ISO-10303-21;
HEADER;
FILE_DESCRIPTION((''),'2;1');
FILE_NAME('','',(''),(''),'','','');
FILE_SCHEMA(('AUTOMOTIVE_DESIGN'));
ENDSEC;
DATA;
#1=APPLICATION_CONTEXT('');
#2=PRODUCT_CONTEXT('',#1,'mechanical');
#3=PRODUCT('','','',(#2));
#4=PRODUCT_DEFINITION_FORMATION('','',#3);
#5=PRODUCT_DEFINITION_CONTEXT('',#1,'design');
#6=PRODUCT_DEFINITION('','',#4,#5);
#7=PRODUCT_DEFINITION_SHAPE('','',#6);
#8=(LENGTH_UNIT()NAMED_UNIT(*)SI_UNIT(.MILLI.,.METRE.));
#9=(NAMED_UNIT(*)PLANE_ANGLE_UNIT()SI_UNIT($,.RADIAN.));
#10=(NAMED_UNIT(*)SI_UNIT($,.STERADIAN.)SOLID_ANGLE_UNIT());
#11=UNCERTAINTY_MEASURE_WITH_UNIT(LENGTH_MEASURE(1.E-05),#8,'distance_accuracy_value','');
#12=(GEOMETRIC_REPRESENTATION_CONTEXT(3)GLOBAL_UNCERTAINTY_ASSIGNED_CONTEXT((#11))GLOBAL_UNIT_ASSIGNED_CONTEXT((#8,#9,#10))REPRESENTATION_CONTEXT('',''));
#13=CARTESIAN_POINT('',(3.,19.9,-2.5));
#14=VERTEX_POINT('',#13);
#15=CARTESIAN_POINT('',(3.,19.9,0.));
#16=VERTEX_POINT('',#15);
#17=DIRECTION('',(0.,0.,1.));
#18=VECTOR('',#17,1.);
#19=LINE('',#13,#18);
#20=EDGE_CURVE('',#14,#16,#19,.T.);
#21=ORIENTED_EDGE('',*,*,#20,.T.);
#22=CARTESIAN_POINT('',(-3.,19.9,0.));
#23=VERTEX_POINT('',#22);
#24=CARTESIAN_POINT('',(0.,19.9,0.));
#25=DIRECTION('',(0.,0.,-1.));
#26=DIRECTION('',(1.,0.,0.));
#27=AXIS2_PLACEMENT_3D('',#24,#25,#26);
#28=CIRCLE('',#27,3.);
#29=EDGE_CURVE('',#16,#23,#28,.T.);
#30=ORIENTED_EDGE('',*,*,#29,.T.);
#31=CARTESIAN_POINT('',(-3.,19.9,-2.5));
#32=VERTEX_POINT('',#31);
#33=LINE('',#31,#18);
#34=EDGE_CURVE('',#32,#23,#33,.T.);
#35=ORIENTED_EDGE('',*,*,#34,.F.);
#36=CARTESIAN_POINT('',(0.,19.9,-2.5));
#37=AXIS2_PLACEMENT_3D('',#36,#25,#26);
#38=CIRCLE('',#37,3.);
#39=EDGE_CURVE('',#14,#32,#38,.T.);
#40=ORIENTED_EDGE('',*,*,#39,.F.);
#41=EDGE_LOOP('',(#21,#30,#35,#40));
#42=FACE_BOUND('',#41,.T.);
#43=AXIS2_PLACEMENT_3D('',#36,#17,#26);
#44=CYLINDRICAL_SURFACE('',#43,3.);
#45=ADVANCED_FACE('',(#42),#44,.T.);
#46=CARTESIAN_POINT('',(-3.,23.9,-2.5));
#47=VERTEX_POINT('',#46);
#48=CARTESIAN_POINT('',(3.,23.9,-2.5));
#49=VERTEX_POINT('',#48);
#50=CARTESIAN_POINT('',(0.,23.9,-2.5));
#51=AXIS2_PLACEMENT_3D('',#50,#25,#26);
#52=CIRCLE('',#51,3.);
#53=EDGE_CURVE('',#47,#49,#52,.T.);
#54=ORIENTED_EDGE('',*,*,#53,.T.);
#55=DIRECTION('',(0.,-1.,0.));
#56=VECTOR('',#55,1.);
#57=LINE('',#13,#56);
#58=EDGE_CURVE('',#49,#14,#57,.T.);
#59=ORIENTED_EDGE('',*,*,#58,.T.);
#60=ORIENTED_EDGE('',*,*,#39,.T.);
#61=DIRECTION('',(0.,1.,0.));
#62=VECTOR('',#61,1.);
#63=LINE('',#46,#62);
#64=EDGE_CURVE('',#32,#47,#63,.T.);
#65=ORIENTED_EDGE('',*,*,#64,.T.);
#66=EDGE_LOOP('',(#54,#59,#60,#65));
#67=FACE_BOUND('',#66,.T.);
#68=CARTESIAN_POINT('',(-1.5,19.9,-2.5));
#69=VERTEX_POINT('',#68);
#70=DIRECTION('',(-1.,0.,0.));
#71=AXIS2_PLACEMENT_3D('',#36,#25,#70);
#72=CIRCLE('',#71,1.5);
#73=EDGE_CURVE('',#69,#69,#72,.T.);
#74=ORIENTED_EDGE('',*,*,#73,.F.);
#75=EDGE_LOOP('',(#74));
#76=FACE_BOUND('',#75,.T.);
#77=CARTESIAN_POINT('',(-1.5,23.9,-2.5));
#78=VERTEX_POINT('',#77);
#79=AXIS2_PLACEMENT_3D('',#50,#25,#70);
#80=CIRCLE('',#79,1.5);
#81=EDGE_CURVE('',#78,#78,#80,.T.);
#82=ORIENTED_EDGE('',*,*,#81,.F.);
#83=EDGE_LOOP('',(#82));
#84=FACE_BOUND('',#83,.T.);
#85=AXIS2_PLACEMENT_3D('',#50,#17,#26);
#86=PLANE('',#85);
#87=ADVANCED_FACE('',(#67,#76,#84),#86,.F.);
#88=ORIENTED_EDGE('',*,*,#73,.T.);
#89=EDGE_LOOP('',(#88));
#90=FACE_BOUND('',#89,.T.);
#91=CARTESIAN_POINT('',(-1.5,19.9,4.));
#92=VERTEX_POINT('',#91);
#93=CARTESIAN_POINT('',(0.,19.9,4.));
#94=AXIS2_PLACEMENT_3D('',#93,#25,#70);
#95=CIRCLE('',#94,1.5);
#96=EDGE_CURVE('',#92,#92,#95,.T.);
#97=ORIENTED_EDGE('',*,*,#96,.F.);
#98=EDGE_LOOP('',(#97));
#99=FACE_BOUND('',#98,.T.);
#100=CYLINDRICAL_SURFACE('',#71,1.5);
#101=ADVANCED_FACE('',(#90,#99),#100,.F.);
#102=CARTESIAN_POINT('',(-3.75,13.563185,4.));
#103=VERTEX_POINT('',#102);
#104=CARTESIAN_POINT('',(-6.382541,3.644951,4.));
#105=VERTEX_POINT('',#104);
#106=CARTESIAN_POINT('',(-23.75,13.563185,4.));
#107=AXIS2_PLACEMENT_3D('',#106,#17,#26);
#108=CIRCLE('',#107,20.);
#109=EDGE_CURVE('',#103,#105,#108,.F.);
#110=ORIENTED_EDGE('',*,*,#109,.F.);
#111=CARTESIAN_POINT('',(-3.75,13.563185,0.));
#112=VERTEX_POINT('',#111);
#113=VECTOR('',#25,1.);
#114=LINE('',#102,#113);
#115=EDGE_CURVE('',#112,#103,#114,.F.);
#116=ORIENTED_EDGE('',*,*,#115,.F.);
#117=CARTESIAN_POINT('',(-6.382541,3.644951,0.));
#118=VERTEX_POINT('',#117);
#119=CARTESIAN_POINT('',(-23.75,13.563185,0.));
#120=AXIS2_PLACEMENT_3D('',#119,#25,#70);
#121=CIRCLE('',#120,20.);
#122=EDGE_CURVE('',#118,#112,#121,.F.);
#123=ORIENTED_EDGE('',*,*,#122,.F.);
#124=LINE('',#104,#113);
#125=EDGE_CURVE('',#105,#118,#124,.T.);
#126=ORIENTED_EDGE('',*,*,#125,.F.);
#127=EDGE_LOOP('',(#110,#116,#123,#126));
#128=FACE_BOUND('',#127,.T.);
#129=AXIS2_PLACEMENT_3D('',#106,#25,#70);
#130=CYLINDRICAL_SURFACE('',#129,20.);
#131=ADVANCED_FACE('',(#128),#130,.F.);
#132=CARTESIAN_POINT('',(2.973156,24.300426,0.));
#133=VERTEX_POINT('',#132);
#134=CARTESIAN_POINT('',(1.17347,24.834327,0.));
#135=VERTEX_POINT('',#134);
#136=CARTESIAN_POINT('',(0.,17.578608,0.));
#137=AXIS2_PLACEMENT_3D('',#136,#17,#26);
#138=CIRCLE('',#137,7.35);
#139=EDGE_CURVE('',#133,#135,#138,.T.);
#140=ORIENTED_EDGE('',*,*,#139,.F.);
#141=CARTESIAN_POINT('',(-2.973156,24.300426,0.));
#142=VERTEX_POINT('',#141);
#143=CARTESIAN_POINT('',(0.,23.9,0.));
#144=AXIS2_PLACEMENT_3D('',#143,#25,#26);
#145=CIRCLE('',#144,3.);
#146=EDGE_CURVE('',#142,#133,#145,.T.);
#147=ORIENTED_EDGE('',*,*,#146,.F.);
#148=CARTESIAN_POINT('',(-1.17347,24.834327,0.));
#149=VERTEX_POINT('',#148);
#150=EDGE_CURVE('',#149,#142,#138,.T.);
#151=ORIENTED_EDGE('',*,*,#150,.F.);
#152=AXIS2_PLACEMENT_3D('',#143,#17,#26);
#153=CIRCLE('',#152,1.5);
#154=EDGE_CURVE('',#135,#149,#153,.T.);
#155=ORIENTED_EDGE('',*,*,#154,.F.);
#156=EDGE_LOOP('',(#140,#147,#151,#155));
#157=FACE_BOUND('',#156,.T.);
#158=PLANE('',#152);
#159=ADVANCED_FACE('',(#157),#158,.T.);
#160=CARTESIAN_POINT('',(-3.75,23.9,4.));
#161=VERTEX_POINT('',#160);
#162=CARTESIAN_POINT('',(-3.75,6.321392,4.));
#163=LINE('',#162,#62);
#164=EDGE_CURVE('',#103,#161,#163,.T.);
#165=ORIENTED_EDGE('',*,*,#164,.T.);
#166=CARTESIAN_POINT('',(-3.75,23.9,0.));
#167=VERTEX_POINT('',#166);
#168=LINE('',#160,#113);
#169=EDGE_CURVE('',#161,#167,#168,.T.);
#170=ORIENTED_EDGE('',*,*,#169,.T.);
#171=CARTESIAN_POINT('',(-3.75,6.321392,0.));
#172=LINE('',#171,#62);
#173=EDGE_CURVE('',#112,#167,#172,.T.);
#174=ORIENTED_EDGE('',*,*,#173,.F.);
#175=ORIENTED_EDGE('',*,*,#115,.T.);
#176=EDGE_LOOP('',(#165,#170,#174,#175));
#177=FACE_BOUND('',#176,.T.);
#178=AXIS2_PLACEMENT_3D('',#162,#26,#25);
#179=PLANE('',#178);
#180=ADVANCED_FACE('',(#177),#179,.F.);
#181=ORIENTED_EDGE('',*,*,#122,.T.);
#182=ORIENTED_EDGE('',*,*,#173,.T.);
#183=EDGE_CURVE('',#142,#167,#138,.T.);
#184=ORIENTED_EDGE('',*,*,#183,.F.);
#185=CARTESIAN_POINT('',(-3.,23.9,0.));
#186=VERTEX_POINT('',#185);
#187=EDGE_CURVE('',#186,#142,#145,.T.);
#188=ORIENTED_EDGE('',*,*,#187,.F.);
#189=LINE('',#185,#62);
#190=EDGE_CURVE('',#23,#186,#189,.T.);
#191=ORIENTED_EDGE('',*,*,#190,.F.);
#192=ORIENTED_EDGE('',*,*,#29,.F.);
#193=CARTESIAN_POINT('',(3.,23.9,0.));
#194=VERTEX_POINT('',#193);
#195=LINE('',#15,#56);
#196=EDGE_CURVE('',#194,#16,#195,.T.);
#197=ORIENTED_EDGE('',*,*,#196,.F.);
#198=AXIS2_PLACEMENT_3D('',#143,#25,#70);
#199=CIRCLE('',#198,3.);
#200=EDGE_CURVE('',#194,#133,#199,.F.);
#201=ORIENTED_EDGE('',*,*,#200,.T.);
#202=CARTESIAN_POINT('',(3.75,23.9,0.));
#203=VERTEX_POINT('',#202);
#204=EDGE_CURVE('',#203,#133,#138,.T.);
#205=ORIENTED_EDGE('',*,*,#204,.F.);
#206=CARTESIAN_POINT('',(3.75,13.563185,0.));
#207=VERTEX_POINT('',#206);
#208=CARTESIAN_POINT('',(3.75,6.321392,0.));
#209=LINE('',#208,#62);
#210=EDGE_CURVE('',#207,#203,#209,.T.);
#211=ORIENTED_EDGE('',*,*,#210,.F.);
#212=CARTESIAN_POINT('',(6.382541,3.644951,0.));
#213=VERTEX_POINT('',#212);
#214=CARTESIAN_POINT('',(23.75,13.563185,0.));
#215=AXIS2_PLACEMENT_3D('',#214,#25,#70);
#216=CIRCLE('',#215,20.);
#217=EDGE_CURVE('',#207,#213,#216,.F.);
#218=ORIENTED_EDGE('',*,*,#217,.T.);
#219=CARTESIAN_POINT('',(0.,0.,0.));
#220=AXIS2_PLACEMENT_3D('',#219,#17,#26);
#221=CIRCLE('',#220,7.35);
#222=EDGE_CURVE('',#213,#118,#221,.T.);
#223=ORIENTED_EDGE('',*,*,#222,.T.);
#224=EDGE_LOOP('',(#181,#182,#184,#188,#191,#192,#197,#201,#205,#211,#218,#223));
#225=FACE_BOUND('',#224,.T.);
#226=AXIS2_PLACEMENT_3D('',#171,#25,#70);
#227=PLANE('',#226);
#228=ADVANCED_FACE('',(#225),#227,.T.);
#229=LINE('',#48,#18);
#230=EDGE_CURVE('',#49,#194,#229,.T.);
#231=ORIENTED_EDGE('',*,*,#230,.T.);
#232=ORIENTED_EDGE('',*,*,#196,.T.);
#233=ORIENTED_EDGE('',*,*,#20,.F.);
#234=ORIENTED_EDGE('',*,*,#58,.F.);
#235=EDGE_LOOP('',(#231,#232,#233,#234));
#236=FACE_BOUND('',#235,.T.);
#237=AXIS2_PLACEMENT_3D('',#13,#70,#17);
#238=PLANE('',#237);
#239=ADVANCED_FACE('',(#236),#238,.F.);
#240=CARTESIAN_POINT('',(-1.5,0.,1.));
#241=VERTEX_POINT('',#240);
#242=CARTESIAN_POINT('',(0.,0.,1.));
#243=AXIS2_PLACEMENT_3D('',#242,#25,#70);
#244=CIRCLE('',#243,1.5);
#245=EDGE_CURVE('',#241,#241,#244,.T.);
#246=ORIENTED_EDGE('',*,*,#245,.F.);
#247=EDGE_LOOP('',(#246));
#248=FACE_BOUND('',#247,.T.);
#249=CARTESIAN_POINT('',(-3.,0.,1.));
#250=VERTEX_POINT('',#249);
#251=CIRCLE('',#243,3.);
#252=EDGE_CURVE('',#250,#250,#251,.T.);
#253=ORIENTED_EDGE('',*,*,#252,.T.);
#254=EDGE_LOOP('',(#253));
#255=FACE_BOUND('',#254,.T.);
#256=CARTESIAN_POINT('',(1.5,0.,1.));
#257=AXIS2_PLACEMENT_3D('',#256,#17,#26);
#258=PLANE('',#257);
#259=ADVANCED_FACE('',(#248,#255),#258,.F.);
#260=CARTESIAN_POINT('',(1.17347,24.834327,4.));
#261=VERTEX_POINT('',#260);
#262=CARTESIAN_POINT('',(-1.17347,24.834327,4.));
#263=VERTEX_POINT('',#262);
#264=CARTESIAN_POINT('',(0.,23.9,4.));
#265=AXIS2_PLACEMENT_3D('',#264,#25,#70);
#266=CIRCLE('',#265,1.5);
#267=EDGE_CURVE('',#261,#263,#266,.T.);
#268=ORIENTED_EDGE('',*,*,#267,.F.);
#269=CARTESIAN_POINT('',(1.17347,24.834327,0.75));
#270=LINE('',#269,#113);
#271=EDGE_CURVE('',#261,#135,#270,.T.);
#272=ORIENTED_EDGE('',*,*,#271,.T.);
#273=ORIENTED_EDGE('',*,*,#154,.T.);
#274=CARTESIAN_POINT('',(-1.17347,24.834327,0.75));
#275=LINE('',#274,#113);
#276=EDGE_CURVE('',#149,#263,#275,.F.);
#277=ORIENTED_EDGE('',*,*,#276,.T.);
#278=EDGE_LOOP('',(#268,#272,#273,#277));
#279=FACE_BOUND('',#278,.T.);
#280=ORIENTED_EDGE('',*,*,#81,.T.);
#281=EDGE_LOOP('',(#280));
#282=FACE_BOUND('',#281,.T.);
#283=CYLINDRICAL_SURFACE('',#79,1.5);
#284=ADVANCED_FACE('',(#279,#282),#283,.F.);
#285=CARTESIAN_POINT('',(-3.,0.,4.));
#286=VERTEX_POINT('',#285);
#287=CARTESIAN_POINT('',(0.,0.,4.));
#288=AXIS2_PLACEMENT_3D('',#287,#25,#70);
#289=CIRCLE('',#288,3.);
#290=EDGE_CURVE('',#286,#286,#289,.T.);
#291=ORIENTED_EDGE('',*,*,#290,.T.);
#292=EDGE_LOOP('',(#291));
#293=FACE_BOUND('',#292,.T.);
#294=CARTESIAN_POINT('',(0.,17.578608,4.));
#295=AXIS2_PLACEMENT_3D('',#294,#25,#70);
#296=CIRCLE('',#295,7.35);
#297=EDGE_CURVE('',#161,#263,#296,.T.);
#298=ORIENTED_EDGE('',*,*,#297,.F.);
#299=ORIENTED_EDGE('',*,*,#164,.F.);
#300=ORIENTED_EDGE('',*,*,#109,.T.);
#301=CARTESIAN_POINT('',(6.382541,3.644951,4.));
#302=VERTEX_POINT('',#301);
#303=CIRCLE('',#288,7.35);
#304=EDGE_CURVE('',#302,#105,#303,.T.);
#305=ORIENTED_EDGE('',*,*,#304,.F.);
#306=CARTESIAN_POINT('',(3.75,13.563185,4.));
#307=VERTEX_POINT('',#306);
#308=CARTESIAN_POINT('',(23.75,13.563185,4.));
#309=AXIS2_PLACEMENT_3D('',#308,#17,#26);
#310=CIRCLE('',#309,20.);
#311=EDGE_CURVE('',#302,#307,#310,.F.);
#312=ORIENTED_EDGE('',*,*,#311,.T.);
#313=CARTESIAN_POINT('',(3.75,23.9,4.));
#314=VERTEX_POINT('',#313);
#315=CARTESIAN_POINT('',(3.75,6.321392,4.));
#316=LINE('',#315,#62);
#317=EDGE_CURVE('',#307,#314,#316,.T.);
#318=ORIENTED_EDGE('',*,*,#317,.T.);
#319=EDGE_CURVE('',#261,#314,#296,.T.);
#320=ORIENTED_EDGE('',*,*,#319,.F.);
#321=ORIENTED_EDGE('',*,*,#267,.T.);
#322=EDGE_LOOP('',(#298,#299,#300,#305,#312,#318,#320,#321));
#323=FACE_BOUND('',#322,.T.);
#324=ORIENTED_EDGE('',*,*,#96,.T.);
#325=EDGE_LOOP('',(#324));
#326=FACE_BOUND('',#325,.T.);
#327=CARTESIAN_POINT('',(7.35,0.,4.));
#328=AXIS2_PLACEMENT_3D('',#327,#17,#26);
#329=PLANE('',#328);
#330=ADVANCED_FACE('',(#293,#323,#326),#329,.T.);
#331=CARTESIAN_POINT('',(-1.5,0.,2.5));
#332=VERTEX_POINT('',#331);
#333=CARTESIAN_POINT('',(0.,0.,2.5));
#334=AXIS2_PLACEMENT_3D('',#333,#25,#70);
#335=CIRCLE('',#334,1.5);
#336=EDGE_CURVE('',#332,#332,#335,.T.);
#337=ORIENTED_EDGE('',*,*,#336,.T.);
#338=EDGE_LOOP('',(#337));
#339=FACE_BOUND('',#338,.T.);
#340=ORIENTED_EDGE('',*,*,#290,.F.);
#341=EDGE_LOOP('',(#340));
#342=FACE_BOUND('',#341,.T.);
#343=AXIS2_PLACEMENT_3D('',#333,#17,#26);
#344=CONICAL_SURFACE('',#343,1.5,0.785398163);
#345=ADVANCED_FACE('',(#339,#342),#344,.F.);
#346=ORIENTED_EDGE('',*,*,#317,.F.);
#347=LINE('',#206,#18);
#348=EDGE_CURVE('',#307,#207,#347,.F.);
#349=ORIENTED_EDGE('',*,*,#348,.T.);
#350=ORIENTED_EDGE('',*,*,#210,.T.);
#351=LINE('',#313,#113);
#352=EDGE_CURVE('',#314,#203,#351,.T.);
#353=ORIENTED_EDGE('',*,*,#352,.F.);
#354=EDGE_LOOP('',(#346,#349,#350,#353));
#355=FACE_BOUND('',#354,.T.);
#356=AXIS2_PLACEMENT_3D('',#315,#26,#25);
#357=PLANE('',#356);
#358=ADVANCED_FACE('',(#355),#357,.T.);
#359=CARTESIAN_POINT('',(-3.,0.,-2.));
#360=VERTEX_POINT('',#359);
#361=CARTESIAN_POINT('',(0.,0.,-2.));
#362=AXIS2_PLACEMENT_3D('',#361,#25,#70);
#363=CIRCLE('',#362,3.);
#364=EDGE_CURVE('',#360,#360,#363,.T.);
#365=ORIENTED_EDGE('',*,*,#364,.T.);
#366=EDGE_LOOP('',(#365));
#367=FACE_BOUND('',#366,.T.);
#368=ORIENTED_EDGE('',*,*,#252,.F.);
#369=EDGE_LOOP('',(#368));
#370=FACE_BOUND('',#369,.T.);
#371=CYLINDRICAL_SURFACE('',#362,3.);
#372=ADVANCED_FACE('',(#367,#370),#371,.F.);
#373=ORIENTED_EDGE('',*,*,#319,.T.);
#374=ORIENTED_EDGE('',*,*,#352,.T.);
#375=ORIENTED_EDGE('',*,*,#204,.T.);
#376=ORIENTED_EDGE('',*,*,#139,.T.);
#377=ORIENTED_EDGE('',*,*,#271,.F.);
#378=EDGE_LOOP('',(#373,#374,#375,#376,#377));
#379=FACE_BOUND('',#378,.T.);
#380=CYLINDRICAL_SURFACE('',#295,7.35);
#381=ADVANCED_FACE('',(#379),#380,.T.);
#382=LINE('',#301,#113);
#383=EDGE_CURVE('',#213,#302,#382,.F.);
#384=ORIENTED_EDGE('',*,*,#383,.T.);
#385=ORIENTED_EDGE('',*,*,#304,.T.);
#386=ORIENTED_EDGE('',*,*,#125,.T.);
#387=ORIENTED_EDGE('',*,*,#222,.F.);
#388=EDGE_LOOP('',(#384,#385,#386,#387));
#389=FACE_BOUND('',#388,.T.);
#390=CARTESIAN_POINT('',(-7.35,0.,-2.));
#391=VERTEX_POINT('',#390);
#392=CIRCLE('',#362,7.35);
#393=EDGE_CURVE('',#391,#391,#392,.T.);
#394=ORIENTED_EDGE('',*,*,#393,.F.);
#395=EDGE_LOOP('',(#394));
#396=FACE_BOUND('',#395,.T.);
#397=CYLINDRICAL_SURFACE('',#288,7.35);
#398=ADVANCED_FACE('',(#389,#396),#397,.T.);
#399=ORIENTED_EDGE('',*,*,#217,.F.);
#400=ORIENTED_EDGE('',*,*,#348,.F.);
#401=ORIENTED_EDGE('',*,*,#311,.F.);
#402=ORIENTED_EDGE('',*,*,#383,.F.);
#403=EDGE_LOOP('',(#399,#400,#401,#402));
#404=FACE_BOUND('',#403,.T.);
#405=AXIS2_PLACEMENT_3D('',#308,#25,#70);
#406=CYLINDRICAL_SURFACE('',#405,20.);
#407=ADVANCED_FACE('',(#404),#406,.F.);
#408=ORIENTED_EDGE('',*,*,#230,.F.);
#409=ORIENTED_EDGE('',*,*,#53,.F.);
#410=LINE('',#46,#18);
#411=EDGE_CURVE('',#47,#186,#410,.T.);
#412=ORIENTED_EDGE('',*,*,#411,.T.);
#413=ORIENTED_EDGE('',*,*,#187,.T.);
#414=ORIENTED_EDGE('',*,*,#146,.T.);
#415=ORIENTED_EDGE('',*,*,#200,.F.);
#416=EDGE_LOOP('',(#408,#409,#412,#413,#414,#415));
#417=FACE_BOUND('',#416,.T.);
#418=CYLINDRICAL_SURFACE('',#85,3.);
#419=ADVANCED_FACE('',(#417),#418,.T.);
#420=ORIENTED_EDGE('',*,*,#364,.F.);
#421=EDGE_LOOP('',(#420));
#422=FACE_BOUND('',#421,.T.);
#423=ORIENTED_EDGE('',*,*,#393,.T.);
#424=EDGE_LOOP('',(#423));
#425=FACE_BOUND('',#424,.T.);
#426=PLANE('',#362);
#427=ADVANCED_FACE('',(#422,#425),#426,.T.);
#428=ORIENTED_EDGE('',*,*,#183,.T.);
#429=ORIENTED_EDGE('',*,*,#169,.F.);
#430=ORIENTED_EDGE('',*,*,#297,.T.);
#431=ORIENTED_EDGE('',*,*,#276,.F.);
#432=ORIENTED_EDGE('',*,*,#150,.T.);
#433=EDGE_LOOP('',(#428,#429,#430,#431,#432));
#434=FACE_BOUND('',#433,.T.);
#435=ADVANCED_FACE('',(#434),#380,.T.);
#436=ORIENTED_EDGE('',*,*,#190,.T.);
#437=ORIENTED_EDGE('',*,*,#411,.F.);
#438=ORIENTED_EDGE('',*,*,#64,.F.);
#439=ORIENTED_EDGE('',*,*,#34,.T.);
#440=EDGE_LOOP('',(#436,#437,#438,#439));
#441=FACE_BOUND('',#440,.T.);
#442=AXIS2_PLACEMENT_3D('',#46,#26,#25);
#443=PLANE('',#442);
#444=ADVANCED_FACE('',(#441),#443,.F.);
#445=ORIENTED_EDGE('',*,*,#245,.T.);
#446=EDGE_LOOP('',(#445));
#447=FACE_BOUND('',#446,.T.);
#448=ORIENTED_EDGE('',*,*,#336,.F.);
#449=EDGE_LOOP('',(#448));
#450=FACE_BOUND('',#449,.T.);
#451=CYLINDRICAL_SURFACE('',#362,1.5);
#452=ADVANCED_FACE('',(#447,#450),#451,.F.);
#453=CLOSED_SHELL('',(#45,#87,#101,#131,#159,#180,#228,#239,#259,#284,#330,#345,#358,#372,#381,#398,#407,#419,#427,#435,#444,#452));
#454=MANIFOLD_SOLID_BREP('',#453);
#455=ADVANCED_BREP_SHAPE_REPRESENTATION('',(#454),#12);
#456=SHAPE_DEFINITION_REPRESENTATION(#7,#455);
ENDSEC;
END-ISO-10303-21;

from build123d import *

# Parameters (mm, degrees)
SKETCH1_W                = 7.35
SKETCH1_H                = 6
BOSS_EXTRUDE1_DEPTH      = 4
BOSS_EXTRUDE2_DEPTH      = 2.5
F_3_0_3_DIAMETER_HOLE1_D = 3
FILLET1_R                = 20


# Read off the part's stored shape, not the designer's step: Boss-Extrude1
with BuildPart() as part:
    # Sketch1 → Revolve1 (revolve)
    with BuildSketch(Plane.XZ, mode=Mode.PRIVATE) as revolve1_sk:
        with Locations((3.675, 1)):
            Rectangle(SKETCH1_W, SKETCH1_H)
    revolve(revolve1_sk.sketch.rotate(Axis((0, 0, 4), (0, 0, -1)), 180), axis=Axis((0, 0, 4), (0, 0, -1)))

    # Boss-Extrude1 outline → Boss-Extrude1 (add)
    with BuildSketch(Plane.XY):
        with BuildLine():
            ThreePointArc((3.75, 23.9), (0, 24.928607748), (-3.75, 23.9))
            Line((-3.75, 23.9), (-3.75, 6.321392252))
            ThreePointArc((-3.75, 6.321392252), (0, 7.35), (3.75, 6.321392252))
            Line((3.75, 6.321392252), (3.75, 23.9))
        make_face()
    extrude(amount=BOSS_EXTRUDE1_DEPTH)

    # Sketch3 → Boss-Extrude2 (add)
    with BuildSketch(Plane(origin=(0, 0, 0), x_dir=(-1, 0, 0), z_dir=(0, 0, -1))):
        with BuildLine():
            Line((3, 23.9), (3, 19.9))
            ThreePointArc((3, 19.9), (0, 16.9), (-3, 19.9))
            Line((-3, 19.9), (-3, 23.9))
            ThreePointArc((-3, 23.9), (0, 26.9), (3, 23.9))
        make_face()
    extrude(amount=BOSS_EXTRUDE2_DEPTH)

    # Ø3.0 (3) Diameter Hole1 (through all)
    with Locations(Plane(origin=(0, 0, -2.5), x_dir=(-1, 0, 0), z_dir=(0, 0, -1))):
        with Locations((0, 23.9), (0, 19.9)):
            Hole(F_3_0_3_DIAMETER_HOLE1_D / 2)

    # Sketch6 → CBORE for M2.5 Hex Head Machine Screw1 (revolve, cut)
    with BuildSketch(Plane(origin=(0, 0, -2), x_dir=(0, 1, 0), z_dir=(1, 0, 0))):
        Polygon((0, 0), (0, 6), (3, 6), (1.5, 4.5), (1.5, 3), (3, 3), (3, 0), align=None)
    revolve(axis=Axis((0, 0, -8.35), (0, 0, 1)), mode=Mode.SUBTRACT)

    # Fillet1
    fillet1_edges = [part.edges().sort_by_distance(p)[0] for p in [
        (-3.75, 6.321392252, 2),
        (3.75, 6.321392252, 2),
    ]]
    fillet(fillet1_edges, radius=FILLET1_R)


solid = part.part
